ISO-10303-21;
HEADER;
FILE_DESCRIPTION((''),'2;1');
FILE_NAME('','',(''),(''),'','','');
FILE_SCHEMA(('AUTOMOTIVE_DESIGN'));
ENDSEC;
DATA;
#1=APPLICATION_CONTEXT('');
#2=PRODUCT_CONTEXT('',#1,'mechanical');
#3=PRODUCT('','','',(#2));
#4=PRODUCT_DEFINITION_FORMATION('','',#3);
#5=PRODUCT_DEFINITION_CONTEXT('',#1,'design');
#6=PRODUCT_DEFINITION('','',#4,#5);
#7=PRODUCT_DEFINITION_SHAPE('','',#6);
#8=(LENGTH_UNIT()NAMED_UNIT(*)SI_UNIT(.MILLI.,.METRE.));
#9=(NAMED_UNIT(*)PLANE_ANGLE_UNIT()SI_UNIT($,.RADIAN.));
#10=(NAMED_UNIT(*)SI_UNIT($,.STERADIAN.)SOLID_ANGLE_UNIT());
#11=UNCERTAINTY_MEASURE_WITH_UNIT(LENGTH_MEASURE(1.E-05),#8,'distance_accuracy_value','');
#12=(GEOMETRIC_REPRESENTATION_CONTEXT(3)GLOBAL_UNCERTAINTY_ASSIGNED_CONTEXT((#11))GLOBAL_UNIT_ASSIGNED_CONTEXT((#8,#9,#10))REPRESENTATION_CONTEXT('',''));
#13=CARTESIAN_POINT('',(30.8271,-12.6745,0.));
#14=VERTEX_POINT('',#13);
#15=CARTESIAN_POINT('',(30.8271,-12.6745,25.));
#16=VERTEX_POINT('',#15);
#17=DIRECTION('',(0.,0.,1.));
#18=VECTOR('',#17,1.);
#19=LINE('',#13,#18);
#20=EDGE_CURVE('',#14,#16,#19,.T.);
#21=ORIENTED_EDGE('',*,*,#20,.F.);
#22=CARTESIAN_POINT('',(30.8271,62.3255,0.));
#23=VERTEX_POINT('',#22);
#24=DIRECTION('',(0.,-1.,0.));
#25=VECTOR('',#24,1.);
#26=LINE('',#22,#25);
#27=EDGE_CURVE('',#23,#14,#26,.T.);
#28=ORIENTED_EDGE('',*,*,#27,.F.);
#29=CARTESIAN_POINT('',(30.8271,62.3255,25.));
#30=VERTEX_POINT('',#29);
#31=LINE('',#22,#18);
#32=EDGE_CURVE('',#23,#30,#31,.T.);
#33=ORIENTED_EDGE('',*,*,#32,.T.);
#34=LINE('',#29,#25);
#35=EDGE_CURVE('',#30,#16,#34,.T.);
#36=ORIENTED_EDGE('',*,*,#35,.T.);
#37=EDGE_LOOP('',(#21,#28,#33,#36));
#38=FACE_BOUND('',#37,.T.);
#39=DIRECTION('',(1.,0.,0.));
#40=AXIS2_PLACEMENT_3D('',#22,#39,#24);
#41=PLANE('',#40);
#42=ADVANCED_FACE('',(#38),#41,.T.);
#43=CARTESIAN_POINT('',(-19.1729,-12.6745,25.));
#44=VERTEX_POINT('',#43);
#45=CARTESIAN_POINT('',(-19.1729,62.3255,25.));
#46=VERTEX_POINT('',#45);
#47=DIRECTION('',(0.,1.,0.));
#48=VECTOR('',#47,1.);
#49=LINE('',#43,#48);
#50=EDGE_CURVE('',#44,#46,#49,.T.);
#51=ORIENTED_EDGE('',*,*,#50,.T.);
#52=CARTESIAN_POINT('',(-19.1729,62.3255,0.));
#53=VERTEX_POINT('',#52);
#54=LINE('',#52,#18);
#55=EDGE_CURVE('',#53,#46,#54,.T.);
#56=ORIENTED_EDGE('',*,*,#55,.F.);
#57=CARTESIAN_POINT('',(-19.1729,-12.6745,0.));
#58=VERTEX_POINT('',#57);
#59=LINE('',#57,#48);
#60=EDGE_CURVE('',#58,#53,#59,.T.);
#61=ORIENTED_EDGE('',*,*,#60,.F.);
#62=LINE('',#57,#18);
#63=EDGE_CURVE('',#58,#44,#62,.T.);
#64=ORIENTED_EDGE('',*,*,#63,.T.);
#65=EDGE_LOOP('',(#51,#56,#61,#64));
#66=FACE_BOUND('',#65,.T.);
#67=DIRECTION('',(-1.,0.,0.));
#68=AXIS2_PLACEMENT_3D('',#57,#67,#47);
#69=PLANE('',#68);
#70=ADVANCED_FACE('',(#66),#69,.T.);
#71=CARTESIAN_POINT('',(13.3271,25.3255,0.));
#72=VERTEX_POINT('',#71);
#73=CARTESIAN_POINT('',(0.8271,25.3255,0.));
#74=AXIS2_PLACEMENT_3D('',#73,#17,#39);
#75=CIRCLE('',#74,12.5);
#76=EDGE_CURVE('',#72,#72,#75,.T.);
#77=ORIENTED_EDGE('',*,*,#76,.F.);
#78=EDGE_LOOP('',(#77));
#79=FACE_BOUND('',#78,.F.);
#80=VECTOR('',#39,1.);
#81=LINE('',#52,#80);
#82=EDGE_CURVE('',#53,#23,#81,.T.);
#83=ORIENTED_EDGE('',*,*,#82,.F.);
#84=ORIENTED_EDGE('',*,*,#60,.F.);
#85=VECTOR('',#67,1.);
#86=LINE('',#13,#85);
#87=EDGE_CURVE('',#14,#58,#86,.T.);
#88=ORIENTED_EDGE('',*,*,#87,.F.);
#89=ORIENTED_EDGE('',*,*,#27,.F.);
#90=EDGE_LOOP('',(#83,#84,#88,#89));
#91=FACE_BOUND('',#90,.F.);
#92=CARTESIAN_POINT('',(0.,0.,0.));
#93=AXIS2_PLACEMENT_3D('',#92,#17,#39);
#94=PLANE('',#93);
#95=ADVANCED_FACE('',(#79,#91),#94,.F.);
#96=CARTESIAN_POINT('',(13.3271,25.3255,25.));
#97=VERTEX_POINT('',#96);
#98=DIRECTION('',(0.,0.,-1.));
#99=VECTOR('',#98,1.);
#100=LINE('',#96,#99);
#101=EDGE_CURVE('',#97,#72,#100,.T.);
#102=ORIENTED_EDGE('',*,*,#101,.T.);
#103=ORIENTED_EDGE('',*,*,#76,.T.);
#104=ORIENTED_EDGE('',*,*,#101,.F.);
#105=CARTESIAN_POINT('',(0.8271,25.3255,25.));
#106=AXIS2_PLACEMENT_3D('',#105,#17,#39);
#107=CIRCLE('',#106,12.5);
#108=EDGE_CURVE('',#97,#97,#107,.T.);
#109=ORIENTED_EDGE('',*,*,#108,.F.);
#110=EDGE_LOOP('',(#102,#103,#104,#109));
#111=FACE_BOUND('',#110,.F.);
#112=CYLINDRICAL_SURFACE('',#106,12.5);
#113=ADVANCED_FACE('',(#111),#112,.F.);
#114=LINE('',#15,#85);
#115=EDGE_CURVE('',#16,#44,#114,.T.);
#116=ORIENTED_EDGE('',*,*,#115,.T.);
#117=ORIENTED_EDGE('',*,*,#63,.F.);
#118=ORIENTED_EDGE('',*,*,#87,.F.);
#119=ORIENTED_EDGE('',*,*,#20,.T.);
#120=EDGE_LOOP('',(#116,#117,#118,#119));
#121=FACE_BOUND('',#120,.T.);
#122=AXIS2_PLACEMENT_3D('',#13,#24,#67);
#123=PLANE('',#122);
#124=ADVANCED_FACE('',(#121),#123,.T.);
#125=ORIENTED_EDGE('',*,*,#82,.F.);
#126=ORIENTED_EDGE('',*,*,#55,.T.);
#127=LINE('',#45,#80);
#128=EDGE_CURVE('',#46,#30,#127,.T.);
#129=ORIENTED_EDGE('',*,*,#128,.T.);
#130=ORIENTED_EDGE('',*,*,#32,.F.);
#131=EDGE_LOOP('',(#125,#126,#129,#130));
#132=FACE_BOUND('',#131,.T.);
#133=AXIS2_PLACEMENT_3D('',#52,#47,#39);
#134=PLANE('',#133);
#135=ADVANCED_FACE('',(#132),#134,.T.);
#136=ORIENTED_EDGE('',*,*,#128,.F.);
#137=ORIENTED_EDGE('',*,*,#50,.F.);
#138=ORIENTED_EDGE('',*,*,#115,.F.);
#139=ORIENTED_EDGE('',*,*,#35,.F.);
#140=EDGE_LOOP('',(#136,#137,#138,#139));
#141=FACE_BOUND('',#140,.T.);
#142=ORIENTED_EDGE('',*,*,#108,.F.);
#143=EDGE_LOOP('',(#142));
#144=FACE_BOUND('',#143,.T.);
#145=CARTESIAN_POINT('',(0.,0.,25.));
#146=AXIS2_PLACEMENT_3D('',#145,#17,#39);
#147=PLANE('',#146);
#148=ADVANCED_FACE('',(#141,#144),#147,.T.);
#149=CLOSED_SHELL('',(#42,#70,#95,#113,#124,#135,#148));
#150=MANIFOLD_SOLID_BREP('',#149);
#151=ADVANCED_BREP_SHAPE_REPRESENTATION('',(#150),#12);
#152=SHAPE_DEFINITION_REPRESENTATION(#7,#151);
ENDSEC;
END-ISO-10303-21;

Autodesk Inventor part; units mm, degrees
ref_plane "YZ Plane" through (0, 0, 0) normal (1, 0, 0) x (0, 1, 0)
ref_plane "XZ Plane" through (0, 0, 0) normal (0, 1, 0) x (-1, 0, 0)
ref_plane "XY Plane" through (0, 0, 0) normal (0, 0, 1) x (1, 0, 0)
sketch "Sketch1" plane through (0, 0, 0) normal (0, 0, 1) x (1, 0, 0)
  line L0 (-19.1729, 62.3255) -> (30.8271, 62.3255)
  line L1 (30.8271, 62.3255) -> (30.8271, -12.6745)
  line L2 (30.8271, -12.6745) -> (-19.1729, -12.6745)
  line L3 (-19.1729, -12.6745) -> (-19.1729, 62.3255)
  dimension "d0" = 50
  dimension "d1" = 75
extrude "Extrusion1" add sketch "Sketch1" along normal blind 25
sketch "Sketch2" plane through (0, 0, 25) normal (0, 0, 1) x (1, 0, 0)
  circle A0 centre (0.8271, 25.3255) radius 12.5
  point P0 (-19.1729, -12.6745)
  dimension "d4" = 20
  dimension "d5" = 25
  dimension "d8" = 38
extrude "Extrusion2" cut sketch "Sketch2" against normal up to surface (25 mm away)
properties part number "box"
